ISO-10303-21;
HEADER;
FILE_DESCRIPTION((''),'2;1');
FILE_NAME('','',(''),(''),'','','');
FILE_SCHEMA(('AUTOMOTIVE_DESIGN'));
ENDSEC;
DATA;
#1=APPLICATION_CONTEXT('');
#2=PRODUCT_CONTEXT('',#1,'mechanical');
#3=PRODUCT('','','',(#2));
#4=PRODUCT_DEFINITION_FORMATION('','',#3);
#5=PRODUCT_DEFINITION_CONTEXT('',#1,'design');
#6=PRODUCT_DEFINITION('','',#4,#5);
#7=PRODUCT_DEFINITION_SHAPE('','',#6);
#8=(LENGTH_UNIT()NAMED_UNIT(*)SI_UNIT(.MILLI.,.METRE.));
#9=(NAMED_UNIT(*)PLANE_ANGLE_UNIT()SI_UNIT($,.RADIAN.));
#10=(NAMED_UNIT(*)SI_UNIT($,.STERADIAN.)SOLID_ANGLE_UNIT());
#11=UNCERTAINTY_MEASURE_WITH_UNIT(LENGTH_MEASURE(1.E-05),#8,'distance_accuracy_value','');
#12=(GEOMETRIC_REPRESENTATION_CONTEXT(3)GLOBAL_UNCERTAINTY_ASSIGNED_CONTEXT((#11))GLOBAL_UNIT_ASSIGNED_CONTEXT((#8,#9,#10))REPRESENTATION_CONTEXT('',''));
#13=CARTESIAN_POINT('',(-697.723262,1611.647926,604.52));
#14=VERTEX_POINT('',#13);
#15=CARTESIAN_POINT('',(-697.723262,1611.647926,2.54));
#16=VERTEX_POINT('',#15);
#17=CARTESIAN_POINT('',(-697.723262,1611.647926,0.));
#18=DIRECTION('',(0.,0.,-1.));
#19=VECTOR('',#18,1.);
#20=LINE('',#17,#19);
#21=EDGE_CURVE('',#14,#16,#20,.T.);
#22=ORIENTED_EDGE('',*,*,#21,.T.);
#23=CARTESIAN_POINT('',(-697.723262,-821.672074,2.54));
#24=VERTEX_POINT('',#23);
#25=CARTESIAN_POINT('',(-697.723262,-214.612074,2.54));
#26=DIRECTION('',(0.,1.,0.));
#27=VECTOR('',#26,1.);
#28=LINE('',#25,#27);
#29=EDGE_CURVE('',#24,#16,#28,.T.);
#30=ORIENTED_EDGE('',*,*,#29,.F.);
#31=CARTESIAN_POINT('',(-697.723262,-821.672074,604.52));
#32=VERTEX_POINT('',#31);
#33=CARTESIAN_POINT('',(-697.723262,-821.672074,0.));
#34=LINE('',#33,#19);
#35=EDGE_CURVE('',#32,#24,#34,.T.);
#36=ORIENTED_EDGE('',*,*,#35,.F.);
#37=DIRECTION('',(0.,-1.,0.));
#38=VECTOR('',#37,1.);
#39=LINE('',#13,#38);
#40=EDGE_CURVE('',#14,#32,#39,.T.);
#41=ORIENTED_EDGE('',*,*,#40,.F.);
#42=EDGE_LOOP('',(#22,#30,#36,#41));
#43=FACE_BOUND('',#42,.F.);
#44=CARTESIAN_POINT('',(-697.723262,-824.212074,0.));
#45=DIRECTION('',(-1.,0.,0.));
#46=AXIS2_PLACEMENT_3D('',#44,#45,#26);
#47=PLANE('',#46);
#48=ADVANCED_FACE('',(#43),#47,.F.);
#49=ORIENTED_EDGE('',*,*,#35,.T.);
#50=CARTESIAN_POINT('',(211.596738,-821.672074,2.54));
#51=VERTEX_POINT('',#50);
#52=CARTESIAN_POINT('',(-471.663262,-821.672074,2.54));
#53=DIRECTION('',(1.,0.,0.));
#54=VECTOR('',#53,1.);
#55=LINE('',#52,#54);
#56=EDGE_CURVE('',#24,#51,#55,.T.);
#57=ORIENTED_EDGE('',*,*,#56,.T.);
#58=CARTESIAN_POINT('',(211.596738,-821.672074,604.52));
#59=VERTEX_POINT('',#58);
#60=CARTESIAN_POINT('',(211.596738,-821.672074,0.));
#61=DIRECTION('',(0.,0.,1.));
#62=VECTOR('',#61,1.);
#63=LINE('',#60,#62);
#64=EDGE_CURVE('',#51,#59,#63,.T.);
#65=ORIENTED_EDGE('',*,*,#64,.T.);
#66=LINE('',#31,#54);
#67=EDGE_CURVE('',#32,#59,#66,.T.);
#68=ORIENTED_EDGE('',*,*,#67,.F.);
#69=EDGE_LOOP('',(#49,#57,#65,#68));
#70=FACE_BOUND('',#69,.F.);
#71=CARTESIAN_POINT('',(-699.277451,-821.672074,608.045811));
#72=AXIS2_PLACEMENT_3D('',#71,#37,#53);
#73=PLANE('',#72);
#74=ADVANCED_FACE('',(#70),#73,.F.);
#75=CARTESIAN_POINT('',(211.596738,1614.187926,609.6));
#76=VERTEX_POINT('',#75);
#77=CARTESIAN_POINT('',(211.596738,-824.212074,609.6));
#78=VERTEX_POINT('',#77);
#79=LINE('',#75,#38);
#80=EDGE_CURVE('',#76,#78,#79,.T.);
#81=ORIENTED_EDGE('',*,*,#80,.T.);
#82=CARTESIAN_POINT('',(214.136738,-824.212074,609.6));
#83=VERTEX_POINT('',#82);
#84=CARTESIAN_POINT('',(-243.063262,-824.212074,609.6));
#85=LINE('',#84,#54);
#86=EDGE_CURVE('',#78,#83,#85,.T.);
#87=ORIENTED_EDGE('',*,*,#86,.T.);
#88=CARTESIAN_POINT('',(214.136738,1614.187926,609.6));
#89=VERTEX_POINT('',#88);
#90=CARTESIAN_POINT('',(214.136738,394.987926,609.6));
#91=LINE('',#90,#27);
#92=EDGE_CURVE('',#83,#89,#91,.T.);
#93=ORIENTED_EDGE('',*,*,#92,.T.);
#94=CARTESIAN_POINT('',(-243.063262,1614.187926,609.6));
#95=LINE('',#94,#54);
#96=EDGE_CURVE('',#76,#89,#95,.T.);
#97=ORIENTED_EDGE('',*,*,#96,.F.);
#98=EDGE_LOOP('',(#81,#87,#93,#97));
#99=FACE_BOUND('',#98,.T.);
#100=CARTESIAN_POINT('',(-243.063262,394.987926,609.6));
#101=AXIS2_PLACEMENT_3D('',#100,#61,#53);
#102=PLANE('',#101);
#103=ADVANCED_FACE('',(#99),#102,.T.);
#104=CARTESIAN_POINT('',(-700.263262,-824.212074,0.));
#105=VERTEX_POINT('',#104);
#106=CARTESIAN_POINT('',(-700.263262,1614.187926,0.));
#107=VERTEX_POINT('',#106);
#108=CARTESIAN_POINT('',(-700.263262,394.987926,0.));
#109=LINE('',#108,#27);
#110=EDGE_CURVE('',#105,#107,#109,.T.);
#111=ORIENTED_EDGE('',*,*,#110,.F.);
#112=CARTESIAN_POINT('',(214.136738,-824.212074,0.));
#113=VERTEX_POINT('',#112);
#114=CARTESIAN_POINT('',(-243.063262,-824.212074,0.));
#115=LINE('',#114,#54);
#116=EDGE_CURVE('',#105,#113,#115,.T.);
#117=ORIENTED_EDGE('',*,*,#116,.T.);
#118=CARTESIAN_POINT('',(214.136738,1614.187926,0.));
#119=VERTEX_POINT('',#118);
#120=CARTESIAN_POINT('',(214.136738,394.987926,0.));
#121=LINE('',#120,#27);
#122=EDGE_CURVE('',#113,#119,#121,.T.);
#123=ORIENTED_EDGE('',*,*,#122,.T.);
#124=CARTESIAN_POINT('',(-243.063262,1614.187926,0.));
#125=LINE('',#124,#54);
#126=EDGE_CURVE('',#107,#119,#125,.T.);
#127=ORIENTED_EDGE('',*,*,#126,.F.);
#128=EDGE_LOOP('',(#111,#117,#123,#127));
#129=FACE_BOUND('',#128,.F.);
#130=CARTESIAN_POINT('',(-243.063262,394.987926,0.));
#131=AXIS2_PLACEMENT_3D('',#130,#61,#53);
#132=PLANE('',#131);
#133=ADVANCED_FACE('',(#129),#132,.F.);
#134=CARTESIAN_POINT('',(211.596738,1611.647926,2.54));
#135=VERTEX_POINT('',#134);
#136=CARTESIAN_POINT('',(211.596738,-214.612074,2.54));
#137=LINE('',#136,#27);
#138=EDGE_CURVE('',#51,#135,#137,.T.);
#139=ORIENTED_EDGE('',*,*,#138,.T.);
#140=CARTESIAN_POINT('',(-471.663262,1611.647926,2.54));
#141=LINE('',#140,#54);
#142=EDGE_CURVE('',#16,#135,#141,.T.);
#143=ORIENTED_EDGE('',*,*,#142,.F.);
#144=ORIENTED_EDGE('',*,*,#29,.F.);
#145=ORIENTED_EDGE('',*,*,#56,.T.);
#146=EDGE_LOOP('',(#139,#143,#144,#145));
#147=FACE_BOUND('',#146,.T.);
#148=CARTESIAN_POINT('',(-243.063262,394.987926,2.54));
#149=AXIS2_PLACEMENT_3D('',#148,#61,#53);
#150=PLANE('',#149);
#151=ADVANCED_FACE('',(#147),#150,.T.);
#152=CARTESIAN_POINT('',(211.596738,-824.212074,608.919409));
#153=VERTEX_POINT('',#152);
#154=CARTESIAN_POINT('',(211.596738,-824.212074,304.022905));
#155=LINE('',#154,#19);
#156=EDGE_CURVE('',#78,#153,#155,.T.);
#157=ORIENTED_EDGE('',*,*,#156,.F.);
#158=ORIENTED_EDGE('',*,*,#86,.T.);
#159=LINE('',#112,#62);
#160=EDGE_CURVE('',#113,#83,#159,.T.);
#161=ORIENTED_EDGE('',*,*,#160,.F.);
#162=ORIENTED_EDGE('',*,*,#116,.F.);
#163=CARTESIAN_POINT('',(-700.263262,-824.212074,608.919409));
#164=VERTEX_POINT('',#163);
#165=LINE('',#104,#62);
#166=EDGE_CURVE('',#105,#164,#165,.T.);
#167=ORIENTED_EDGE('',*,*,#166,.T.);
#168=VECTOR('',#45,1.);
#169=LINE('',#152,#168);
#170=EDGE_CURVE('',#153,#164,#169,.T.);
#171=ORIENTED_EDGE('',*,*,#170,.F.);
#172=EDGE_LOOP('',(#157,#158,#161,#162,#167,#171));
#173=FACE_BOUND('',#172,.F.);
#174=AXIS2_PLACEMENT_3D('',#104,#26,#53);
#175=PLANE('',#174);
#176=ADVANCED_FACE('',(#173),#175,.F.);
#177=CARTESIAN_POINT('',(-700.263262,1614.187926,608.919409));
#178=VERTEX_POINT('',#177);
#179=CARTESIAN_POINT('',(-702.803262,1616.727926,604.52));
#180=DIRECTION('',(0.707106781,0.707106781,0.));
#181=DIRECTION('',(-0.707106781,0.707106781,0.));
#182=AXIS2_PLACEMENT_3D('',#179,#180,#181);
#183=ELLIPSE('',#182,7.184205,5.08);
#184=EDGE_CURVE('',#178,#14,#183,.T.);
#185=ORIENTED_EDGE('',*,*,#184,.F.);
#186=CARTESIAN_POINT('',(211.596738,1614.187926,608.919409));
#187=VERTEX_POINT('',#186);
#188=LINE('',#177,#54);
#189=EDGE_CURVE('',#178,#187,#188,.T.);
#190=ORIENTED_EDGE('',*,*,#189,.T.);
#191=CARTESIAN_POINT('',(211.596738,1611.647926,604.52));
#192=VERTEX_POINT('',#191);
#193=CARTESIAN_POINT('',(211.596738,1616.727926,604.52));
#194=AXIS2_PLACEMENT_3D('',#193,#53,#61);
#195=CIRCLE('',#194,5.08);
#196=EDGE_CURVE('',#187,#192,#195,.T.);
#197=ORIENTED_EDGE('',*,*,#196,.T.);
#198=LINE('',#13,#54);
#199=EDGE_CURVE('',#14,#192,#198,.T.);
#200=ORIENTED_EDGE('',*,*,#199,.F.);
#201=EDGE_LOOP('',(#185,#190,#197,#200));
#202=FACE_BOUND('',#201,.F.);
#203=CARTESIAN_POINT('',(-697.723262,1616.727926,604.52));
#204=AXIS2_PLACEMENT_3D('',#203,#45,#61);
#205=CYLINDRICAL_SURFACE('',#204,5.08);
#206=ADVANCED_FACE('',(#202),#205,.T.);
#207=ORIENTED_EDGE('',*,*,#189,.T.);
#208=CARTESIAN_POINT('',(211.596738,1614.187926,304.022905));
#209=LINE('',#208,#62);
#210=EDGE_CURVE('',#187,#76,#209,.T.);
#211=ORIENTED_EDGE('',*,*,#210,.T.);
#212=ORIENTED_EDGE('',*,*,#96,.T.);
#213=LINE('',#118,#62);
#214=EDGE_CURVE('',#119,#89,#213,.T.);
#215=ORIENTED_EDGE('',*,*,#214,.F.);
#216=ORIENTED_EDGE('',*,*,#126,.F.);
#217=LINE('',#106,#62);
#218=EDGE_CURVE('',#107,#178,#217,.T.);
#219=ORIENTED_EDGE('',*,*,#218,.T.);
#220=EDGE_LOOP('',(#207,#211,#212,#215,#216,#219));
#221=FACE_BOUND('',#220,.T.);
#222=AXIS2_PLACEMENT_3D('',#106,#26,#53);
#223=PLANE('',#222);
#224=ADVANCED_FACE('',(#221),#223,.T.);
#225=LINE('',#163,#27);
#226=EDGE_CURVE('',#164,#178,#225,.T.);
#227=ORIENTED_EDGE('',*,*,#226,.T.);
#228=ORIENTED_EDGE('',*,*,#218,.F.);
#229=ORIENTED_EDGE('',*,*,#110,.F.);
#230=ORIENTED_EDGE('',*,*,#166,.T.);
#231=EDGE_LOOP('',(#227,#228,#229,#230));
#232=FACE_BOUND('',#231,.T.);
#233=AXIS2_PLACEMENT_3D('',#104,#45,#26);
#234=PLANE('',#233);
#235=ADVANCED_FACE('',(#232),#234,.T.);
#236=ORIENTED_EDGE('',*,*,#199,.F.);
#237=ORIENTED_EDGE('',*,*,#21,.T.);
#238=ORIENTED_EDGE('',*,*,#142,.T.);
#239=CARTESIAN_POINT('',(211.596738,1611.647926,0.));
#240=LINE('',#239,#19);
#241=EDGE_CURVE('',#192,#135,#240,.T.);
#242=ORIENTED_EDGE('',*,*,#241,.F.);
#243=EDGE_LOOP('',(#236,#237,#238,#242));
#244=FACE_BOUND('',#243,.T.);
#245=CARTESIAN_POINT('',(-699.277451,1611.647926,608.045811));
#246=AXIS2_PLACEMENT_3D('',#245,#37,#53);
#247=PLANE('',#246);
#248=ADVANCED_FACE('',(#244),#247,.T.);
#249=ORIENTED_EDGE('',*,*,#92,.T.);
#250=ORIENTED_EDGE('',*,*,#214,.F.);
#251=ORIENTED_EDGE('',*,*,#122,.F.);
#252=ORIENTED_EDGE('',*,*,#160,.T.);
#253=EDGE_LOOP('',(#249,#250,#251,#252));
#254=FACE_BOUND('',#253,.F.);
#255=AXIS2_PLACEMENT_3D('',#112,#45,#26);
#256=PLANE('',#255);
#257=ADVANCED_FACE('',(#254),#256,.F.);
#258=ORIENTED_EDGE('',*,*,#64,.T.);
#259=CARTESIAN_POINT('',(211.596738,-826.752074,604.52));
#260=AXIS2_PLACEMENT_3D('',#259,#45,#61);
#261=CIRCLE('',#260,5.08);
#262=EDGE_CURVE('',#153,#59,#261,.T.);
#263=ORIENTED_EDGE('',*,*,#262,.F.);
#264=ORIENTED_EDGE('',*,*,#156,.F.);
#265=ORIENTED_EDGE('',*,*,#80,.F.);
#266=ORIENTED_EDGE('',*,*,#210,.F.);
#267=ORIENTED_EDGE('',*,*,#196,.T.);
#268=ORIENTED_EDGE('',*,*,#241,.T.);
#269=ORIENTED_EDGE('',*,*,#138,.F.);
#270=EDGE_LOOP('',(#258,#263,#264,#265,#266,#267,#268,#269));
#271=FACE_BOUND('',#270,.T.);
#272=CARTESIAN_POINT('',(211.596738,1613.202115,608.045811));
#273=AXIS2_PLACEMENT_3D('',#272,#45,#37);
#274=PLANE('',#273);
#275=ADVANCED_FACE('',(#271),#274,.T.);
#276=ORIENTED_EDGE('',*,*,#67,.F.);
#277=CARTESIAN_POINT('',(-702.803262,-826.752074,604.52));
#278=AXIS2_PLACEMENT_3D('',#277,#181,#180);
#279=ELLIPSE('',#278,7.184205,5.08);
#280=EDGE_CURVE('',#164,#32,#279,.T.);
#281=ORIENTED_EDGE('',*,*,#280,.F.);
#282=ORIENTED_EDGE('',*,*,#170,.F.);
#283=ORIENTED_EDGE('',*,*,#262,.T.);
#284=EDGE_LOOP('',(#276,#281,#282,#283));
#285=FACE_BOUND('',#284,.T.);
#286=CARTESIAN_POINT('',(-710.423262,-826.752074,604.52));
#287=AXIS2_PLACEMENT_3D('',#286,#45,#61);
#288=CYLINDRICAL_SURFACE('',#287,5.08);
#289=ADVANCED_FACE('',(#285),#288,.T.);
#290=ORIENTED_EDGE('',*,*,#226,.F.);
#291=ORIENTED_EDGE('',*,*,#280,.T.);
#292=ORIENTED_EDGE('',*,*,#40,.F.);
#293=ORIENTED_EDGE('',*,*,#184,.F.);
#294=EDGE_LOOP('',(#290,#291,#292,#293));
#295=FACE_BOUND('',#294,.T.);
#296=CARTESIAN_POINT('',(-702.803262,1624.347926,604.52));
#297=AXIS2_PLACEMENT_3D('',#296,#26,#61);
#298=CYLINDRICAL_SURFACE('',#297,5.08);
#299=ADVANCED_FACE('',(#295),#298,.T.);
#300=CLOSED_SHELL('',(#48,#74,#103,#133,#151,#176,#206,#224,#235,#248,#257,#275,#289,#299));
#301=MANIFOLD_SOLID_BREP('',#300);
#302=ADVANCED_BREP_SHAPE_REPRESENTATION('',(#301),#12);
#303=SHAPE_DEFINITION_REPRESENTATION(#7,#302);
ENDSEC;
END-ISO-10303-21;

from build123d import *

# Parameters (mm, degrees)
F0_W         = 914.4
F0_H         = 2438.4
F1_DEPTH     = 609.6
F3_T         = -2.54
F4_T1_DEPTH  = 2433.32
F4_T3_DEPTH  = 909.32
F4_T9_DEPTH  = 2446.02
F4_T15_DEPTH = 922.02
F4_T24_DEPTH = 2446.02
F4_T30_DEPTH = 922.02


# Not quite as in the source:
# - a fillet or chamfer that OpenCascade refuses, or shapes differently, is made with other operations: its cross-section is extruded or revolved along the edge and cut away or added


with BuildPart() as f1:
    # F0 (on Top) → F1 (new body)
    with BuildSketch(Plane.XY):
        with Locations((-243.063261795, 394.9879257202)):
            Rectangle(F0_W, F0_H)
    extrude(amount=F1_DEPTH)

    # F3
    f3_openings = [f1.faces().sort_by_distance(p)[0] for p in [
        (-243.063262, 394.987926, 609.6),
    ]]
    offset(amount=F3_T, openings=f3_openings)

    # F4: fillet of radius 5.08 on 3 edges, made by hand

    # F4_s2 → F4_t1 (cut)
    with BuildSketch(Plane.XZ.offset(-1611.6479257202)):
        with BuildLine():
            ThreePointArc((-702.803261795, 609.6), (-699.2111593466, 608.1121024484), (-697.723261795, 604.52))
            Line((-697.723261795, 604.52), (-697.723261795, 609.6))
            Line((-697.723261795, 609.6), (-702.803261795, 609.6))
        make_face()
    extrude(amount=F4_T1_DEPTH, mode=Mode.SUBTRACT)

    # F4_s4 → F4_t3 (cut)
    with BuildSketch(Plane.YZ.offset(-697.723261795)):
        with BuildLine():
            ThreePointArc((-826.7520742798, 609.6), (-823.1599718314, 608.1121024484), (-821.6720742798, 604.52))
            Line((-821.6720742798, 604.52), (-821.6720742798, 609.6))
            Line((-821.6720742798, 609.6), (-826.7520742798, 609.6))
        make_face()
        with BuildLine():
            ThreePointArc((1616.7279257202, 609.6), (1613.1358232718, 608.1121024484), (1611.6479257202, 604.52))
            Line((1611.6479257202, 604.52), (1611.6479257202, 609.6))
            Line((1611.6479257202, 609.6), (1616.7279257202, 609.6))
        make_face()
    extrude(amount=F4_T3_DEPTH, mode=Mode.SUBTRACT)


with BuildPart() as f4_tool7:
    # F4_s8 → F4_t9 (new body)
    with BuildSketch(Plane.XZ.offset(-1624.3479257202)):
        with BuildLine():
            ThreePointArc((-702.803261795, 609.6), (-699.2111593466, 608.1121024484), (-697.723261795, 604.52))
            Line((-697.723261795, 604.52), (-697.723261795, 609.6))
            Line((-697.723261795, 609.6), (-702.803261795, 609.6))
        make_face()
    extrude(amount=F4_T9_DEPTH)

    split(bisect_by=Plane.YZ.offset(-700.263261795), keep=Keep.TOP)

    split(bisect_by=Plane.XZ.offset(-1614.1879257202), keep=Keep.TOP)

    split(bisect_by=Plane.XZ.offset(-1611.6479257202), keep=Keep.BOTTOM)


with BuildPart() as f4_tool13:
    # F4_s14 → F4_t15 (new body)
    with BuildSketch(Plane.YZ.offset(211.596738205)):
        with BuildLine():
            ThreePointArc((1616.7279257202, 609.6), (1613.1358232718, 608.1121024484), (1611.6479257202, 604.52))
            Line((1611.6479257202, 604.52), (1611.6479257202, 609.6))
            Line((1611.6479257202, 609.6), (1616.7279257202, 609.6))
        make_face()
    extrude(amount=-F4_T15_DEPTH)

    split(bisect_by=Plane.YZ.offset(-700.263261795), keep=Keep.TOP)

    split(bisect_by=Plane.XZ.offset(-1614.1879257202), keep=Keep.TOP)

    split(bisect_by=Plane.YZ.offset(-697.723261795), keep=Keep.BOTTOM)


with BuildPart() as f4_tool7_1:
    add(f4_tool7.part)

    # F4_t19: intersect F4_tool13
    add(f4_tool13.part, mode=Mode.INTERSECT)


with BuildPart() as f1_1:
    add(f1.part)

    # F4_t5: cut F4_tool7
    add(f4_tool7_1.part, mode=Mode.SUBTRACT)


with BuildPart() as f4_tool22:
    # F4_s23 → F4_t24 (new body)
    with BuildSketch(Plane.XZ.offset(-1611.6479257202)):
        with BuildLine():
            ThreePointArc((-702.803261795, 609.6), (-699.2111593466, 608.1121024484), (-697.723261795, 604.52))
            Line((-697.723261795, 604.52), (-697.723261795, 609.6))
            Line((-697.723261795, 609.6), (-702.803261795, 609.6))
        make_face()
    extrude(amount=F4_T24_DEPTH)

    split(bisect_by=Plane.YZ.offset(-700.263261795), keep=Keep.TOP)

    split(bisect_by=Plane.XZ.offset(824.2120742798), keep=Keep.BOTTOM)

    split(bisect_by=Plane.XZ.offset(821.6720742798), keep=Keep.TOP)


with BuildPart() as f4_tool28:
    # F4_s29 → F4_t30 (new body)
    with BuildSketch(Plane.YZ.offset(-710.423261795)):
        with BuildLine():
            ThreePointArc((-826.7520742798, 609.6), (-823.1599718314, 608.1121024484), (-821.6720742798, 604.52))
            Line((-821.6720742798, 604.52), (-821.6720742798, 609.6))
            Line((-821.6720742798, 609.6), (-826.7520742798, 609.6))
        make_face()
    extrude(amount=F4_T30_DEPTH)

    split(bisect_by=Plane.YZ.offset(-700.263261795), keep=Keep.TOP)

    split(bisect_by=Plane.XZ.offset(824.2120742798), keep=Keep.BOTTOM)

    split(bisect_by=Plane.YZ.offset(-697.723261795), keep=Keep.BOTTOM)


with BuildPart() as f4_tool22_1:
    add(f4_tool22.part)

    # F4_t34: intersect F4_tool28
    add(f4_tool28.part, mode=Mode.INTERSECT)


with BuildPart() as f1_2:
    add(f1_1.part)

    # F4_t20: cut F4_tool22
    add(f4_tool22_1.part, mode=Mode.SUBTRACT)


solid = f1_2.part
